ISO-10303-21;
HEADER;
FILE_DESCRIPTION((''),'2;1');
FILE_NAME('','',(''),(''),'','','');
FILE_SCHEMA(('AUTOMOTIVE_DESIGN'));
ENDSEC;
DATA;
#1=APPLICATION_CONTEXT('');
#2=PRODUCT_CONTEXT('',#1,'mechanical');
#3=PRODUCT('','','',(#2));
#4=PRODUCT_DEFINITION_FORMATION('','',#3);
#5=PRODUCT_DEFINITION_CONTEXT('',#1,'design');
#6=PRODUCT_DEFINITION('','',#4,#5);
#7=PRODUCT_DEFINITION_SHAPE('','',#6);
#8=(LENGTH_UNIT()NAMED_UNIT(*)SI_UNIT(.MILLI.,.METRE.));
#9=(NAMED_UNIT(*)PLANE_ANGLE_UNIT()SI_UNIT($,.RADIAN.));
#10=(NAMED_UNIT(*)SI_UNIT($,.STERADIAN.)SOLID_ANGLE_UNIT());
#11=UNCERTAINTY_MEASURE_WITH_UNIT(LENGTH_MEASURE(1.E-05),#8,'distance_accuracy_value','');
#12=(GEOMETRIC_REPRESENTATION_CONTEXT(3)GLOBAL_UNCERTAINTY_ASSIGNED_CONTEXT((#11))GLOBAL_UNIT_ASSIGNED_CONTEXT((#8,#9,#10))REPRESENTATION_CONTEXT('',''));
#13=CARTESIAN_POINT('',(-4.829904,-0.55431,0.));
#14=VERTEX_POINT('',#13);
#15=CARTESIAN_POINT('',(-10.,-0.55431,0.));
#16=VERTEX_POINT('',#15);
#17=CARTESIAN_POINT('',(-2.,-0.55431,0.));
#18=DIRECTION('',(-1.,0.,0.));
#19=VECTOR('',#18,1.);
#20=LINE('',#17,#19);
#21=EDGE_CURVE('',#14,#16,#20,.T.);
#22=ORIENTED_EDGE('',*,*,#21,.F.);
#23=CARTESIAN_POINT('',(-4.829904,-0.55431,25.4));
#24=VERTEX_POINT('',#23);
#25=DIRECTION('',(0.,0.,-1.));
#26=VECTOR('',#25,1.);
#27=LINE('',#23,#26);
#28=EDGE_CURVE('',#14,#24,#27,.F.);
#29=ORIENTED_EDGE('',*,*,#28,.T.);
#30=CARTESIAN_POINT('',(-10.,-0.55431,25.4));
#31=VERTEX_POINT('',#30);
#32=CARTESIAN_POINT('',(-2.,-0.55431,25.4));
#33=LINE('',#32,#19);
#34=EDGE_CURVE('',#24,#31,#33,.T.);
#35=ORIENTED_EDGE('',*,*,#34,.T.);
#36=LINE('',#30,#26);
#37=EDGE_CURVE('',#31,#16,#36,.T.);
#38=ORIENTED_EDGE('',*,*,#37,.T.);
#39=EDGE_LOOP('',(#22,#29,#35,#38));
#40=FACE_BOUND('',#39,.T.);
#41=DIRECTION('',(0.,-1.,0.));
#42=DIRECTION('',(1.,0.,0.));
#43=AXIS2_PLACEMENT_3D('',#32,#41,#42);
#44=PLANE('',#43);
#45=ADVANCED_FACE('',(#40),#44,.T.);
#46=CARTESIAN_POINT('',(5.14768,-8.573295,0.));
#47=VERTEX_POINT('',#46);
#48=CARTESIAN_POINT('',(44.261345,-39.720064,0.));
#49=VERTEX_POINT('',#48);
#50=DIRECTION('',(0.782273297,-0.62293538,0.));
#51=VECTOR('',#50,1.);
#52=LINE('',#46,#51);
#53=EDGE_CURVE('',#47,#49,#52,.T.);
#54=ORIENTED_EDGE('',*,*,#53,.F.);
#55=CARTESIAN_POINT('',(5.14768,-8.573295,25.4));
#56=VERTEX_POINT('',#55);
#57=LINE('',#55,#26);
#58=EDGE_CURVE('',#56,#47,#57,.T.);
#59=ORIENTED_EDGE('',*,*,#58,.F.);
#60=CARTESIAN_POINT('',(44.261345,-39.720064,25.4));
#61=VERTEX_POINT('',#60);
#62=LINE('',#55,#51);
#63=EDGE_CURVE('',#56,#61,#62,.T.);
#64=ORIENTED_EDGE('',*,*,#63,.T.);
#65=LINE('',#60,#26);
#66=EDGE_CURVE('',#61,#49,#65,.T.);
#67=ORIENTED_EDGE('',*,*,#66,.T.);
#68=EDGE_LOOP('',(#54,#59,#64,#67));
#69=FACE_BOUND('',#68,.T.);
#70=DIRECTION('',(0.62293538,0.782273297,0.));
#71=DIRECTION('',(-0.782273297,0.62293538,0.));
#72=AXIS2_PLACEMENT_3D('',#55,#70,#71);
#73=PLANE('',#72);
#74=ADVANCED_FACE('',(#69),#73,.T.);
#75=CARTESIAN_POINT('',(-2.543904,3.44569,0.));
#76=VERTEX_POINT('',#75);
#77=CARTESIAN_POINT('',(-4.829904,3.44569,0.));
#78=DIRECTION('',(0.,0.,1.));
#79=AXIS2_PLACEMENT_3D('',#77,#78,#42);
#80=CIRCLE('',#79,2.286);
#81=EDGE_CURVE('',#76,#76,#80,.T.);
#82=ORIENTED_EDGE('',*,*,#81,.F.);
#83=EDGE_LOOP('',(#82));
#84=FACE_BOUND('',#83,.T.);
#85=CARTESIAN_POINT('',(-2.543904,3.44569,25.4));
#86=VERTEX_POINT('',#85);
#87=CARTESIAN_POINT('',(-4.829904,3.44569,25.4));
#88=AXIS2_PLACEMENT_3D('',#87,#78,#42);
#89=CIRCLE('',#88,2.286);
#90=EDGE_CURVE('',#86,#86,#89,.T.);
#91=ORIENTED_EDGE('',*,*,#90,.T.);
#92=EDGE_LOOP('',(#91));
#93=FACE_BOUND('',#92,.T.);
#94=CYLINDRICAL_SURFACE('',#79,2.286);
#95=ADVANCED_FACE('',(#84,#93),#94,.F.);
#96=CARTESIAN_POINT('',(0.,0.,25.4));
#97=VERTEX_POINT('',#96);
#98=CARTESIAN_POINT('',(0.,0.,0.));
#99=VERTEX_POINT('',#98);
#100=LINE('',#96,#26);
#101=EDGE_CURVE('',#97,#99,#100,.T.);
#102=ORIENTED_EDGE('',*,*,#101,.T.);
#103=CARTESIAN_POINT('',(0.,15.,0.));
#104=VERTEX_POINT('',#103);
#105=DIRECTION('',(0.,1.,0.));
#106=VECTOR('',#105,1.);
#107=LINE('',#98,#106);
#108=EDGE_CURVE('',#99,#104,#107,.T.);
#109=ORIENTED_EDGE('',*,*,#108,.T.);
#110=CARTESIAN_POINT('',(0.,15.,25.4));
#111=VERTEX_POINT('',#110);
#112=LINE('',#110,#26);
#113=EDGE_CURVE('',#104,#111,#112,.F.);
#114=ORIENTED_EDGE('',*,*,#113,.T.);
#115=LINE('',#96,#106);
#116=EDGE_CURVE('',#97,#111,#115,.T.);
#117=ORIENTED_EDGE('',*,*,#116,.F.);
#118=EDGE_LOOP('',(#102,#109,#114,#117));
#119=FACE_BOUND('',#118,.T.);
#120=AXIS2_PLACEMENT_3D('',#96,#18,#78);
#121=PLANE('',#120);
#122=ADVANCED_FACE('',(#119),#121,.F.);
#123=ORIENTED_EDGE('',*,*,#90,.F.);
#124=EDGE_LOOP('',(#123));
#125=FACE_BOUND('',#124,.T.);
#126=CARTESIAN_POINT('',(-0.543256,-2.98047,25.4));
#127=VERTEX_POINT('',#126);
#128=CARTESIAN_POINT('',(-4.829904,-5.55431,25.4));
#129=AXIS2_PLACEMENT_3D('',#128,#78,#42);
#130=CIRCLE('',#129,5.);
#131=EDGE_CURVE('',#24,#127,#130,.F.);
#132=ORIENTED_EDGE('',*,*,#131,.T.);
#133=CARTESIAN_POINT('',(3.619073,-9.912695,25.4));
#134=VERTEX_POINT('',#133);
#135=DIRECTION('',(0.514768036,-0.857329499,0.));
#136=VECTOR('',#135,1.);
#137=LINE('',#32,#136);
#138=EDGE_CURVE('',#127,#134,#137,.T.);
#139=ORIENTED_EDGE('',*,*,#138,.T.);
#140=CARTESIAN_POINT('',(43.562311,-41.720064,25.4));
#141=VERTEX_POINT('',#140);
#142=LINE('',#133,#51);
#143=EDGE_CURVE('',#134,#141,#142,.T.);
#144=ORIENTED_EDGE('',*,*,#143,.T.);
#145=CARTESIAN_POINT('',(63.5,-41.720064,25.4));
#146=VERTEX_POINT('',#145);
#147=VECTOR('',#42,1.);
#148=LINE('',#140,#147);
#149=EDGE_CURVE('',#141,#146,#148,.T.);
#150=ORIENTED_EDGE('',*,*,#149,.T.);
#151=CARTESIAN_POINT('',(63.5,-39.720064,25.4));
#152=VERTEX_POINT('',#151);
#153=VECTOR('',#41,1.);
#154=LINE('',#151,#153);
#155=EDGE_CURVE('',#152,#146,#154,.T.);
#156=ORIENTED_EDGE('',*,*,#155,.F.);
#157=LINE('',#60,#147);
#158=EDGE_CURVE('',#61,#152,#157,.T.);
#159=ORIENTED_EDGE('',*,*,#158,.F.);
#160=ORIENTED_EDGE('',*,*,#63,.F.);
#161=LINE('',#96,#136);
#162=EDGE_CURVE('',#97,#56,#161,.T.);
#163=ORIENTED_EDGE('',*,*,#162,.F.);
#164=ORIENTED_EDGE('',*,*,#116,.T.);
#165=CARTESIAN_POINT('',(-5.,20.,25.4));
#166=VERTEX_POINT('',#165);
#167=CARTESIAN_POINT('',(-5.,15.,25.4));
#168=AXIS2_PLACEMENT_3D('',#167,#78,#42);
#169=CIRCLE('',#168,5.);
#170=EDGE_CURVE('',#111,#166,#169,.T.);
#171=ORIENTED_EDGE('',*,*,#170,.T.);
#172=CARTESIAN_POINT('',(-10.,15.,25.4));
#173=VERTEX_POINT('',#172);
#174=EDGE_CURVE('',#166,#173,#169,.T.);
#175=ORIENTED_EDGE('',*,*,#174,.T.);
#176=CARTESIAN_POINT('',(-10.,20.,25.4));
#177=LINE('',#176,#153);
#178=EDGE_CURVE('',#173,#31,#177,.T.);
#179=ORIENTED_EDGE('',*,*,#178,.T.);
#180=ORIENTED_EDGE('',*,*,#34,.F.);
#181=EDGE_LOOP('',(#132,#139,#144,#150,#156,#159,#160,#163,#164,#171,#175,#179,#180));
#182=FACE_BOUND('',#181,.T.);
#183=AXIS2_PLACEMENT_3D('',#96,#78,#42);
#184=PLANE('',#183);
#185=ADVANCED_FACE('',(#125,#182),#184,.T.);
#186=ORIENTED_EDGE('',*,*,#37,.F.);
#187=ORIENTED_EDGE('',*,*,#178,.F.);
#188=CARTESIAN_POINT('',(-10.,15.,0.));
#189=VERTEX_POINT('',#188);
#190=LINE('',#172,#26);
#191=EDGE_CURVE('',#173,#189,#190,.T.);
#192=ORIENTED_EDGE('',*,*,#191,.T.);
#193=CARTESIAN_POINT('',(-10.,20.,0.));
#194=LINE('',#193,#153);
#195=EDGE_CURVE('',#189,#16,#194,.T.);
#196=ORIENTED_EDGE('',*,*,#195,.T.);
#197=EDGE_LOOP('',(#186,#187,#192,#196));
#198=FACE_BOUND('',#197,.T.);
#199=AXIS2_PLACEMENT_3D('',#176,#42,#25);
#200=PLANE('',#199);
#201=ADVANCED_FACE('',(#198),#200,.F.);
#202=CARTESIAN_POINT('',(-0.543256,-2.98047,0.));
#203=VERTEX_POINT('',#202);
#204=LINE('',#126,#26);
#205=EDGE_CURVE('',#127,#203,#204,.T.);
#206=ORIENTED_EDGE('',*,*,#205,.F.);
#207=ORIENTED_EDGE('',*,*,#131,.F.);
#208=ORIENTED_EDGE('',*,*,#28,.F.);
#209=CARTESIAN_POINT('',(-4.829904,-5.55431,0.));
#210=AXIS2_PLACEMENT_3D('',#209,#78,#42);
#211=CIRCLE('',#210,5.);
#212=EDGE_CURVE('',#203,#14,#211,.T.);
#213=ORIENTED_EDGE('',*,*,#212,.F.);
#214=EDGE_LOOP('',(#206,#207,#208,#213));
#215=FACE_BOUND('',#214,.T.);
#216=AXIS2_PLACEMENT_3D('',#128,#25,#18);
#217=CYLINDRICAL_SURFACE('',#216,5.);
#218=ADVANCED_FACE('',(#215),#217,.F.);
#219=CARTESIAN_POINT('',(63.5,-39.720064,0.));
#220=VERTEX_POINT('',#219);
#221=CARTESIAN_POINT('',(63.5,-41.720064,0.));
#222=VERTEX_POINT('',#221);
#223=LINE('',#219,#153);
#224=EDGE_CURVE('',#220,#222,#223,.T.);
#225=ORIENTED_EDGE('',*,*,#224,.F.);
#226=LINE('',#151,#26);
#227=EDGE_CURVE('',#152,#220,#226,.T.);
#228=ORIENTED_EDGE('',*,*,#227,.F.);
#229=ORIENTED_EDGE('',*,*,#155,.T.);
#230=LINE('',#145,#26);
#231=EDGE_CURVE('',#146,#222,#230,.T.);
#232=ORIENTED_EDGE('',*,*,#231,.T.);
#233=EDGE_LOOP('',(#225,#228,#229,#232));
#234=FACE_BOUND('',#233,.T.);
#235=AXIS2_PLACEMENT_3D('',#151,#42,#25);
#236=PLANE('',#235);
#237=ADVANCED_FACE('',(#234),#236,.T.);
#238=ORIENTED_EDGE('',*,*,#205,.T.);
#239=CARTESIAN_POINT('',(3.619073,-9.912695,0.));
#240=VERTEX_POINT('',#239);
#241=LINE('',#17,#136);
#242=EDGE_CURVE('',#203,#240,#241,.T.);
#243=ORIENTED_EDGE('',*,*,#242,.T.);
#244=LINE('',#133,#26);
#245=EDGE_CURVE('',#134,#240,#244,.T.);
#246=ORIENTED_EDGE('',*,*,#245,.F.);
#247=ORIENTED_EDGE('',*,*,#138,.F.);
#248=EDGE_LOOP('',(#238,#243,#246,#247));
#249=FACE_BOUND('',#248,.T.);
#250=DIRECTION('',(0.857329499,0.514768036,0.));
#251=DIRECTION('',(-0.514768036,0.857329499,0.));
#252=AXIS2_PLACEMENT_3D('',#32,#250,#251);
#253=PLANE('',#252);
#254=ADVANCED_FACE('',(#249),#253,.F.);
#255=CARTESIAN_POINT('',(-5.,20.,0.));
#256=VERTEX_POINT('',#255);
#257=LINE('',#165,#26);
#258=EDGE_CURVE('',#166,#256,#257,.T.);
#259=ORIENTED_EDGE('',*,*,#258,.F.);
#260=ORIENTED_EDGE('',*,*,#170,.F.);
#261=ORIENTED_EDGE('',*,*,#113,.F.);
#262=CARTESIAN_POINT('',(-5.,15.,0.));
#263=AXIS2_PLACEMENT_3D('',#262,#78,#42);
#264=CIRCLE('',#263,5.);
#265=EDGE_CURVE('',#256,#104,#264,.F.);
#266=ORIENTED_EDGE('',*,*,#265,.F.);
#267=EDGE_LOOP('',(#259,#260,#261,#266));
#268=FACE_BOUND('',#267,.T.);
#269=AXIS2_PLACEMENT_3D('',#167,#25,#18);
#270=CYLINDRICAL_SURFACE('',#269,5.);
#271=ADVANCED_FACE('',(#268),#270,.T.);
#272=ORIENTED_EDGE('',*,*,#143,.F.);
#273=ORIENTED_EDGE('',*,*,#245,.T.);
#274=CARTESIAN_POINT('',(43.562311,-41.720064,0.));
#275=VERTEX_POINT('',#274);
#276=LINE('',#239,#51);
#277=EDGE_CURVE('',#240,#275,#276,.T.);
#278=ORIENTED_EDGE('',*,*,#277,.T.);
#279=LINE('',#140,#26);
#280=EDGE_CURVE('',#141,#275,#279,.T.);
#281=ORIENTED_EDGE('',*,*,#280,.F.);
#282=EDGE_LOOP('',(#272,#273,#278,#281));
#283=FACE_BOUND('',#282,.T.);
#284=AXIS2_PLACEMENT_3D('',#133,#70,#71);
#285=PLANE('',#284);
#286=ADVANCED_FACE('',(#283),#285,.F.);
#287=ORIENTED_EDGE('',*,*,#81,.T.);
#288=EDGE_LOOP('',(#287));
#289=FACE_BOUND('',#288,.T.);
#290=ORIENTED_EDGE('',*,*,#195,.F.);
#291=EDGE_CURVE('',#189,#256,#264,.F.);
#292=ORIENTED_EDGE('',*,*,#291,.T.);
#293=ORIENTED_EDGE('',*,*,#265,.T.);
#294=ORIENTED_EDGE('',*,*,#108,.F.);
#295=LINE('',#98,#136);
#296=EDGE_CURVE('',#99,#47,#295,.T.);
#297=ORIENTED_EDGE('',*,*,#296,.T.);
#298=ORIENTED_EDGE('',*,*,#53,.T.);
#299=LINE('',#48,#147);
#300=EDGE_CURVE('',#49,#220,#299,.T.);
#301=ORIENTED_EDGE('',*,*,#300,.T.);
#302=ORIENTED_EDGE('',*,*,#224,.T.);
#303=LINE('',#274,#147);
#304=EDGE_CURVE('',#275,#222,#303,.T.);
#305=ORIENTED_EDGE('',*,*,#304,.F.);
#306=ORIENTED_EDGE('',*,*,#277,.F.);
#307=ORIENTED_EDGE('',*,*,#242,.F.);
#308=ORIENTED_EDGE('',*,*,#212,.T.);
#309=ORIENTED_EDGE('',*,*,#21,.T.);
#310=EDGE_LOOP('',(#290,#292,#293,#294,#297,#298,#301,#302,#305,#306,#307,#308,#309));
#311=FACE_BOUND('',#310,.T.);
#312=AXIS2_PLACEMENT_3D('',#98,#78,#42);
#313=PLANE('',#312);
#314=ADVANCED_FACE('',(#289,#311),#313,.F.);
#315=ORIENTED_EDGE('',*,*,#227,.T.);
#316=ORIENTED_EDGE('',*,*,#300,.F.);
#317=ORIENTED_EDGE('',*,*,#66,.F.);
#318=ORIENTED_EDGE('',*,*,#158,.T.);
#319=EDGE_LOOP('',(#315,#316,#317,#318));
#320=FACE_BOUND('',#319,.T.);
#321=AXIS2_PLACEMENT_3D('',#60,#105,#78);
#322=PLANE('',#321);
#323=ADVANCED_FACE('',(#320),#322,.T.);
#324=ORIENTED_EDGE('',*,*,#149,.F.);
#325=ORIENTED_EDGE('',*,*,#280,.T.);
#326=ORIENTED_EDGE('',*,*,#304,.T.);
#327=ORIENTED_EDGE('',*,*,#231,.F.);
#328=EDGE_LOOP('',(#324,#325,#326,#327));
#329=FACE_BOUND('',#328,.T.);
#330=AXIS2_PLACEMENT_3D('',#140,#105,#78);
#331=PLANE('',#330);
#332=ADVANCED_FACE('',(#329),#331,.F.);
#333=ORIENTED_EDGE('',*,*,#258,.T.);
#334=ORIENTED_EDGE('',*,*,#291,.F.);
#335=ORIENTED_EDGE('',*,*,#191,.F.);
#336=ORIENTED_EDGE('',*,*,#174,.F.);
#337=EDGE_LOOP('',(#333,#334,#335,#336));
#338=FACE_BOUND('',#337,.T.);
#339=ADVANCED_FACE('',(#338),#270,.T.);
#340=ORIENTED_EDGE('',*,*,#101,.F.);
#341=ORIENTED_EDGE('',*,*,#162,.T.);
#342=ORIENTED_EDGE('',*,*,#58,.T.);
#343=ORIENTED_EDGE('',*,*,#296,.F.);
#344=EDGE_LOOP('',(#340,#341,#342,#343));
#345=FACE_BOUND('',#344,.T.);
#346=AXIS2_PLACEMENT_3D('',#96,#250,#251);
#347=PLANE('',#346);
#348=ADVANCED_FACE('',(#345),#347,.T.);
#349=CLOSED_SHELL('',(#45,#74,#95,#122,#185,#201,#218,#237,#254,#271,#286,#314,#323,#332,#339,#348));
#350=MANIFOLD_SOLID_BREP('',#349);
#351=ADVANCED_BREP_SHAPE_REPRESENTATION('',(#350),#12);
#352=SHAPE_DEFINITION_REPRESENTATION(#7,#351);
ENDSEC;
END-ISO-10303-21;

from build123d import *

# Parameters (mm, degrees)
BOSS_EXTRUDE1_DEPTH = 25.4
FILLET1_R           = 5
FILLET2_R           = 5
FILLET3_R           = 5
SKETCH2_R           = 2.286
CUT_EXTRUDE2_DEPTH  = 81.112257119


with BuildPart() as part:
    # Sketch1 → Boss-Extrude1 (new body)
    with BuildSketch(Plane.XY):
        Polygon((0, 0), (5.147680359, -8.573294986), (44.26134523, -39.720064006), (63.5, -39.720064006), (63.5, -41.720064006), (43.562310597, -41.720064006), (3.619073412, -9.912694725), (-2, -0.554309869), (-10, -0.554309869), (-10, 20), (0, 20), align=None)
    extrude(amount=BOSS_EXTRUDE1_DEPTH)

    # Fillet1
    fillet1_edges = [part.edges().sort_by_distance(p)[0] for p in [
        (-2, -0.554309869, 12.7),
    ]]
    fillet(fillet1_edges, radius=FILLET1_R)

    # Fillet2
    fillet2_edges = [part.edges().sort_by_distance(p)[0] for p in [
        (0, 20, 12.7),
    ]]
    fillet(fillet2_edges, radius=FILLET2_R)

    # Fillet3
    fillet3_edges = [part.edges().sort_by_distance(p)[0] for p in [
        (-10, 20, 12.7),
    ]]
    fillet(fillet3_edges, radius=FILLET3_R - 0.0001)  # a hair under: the kernel refuses the full size

    # Sketch2 → Cut-Extrude2 (cut, through all)
    with BuildSketch(Plane.XY.offset(25.4)):
        with Locations((-4.829903584, 3.445690131)):
            Circle(SKETCH2_R)
    extrude(amount=-CUT_EXTRUDE2_DEPTH, mode=Mode.SUBTRACT)


solid = part.part
